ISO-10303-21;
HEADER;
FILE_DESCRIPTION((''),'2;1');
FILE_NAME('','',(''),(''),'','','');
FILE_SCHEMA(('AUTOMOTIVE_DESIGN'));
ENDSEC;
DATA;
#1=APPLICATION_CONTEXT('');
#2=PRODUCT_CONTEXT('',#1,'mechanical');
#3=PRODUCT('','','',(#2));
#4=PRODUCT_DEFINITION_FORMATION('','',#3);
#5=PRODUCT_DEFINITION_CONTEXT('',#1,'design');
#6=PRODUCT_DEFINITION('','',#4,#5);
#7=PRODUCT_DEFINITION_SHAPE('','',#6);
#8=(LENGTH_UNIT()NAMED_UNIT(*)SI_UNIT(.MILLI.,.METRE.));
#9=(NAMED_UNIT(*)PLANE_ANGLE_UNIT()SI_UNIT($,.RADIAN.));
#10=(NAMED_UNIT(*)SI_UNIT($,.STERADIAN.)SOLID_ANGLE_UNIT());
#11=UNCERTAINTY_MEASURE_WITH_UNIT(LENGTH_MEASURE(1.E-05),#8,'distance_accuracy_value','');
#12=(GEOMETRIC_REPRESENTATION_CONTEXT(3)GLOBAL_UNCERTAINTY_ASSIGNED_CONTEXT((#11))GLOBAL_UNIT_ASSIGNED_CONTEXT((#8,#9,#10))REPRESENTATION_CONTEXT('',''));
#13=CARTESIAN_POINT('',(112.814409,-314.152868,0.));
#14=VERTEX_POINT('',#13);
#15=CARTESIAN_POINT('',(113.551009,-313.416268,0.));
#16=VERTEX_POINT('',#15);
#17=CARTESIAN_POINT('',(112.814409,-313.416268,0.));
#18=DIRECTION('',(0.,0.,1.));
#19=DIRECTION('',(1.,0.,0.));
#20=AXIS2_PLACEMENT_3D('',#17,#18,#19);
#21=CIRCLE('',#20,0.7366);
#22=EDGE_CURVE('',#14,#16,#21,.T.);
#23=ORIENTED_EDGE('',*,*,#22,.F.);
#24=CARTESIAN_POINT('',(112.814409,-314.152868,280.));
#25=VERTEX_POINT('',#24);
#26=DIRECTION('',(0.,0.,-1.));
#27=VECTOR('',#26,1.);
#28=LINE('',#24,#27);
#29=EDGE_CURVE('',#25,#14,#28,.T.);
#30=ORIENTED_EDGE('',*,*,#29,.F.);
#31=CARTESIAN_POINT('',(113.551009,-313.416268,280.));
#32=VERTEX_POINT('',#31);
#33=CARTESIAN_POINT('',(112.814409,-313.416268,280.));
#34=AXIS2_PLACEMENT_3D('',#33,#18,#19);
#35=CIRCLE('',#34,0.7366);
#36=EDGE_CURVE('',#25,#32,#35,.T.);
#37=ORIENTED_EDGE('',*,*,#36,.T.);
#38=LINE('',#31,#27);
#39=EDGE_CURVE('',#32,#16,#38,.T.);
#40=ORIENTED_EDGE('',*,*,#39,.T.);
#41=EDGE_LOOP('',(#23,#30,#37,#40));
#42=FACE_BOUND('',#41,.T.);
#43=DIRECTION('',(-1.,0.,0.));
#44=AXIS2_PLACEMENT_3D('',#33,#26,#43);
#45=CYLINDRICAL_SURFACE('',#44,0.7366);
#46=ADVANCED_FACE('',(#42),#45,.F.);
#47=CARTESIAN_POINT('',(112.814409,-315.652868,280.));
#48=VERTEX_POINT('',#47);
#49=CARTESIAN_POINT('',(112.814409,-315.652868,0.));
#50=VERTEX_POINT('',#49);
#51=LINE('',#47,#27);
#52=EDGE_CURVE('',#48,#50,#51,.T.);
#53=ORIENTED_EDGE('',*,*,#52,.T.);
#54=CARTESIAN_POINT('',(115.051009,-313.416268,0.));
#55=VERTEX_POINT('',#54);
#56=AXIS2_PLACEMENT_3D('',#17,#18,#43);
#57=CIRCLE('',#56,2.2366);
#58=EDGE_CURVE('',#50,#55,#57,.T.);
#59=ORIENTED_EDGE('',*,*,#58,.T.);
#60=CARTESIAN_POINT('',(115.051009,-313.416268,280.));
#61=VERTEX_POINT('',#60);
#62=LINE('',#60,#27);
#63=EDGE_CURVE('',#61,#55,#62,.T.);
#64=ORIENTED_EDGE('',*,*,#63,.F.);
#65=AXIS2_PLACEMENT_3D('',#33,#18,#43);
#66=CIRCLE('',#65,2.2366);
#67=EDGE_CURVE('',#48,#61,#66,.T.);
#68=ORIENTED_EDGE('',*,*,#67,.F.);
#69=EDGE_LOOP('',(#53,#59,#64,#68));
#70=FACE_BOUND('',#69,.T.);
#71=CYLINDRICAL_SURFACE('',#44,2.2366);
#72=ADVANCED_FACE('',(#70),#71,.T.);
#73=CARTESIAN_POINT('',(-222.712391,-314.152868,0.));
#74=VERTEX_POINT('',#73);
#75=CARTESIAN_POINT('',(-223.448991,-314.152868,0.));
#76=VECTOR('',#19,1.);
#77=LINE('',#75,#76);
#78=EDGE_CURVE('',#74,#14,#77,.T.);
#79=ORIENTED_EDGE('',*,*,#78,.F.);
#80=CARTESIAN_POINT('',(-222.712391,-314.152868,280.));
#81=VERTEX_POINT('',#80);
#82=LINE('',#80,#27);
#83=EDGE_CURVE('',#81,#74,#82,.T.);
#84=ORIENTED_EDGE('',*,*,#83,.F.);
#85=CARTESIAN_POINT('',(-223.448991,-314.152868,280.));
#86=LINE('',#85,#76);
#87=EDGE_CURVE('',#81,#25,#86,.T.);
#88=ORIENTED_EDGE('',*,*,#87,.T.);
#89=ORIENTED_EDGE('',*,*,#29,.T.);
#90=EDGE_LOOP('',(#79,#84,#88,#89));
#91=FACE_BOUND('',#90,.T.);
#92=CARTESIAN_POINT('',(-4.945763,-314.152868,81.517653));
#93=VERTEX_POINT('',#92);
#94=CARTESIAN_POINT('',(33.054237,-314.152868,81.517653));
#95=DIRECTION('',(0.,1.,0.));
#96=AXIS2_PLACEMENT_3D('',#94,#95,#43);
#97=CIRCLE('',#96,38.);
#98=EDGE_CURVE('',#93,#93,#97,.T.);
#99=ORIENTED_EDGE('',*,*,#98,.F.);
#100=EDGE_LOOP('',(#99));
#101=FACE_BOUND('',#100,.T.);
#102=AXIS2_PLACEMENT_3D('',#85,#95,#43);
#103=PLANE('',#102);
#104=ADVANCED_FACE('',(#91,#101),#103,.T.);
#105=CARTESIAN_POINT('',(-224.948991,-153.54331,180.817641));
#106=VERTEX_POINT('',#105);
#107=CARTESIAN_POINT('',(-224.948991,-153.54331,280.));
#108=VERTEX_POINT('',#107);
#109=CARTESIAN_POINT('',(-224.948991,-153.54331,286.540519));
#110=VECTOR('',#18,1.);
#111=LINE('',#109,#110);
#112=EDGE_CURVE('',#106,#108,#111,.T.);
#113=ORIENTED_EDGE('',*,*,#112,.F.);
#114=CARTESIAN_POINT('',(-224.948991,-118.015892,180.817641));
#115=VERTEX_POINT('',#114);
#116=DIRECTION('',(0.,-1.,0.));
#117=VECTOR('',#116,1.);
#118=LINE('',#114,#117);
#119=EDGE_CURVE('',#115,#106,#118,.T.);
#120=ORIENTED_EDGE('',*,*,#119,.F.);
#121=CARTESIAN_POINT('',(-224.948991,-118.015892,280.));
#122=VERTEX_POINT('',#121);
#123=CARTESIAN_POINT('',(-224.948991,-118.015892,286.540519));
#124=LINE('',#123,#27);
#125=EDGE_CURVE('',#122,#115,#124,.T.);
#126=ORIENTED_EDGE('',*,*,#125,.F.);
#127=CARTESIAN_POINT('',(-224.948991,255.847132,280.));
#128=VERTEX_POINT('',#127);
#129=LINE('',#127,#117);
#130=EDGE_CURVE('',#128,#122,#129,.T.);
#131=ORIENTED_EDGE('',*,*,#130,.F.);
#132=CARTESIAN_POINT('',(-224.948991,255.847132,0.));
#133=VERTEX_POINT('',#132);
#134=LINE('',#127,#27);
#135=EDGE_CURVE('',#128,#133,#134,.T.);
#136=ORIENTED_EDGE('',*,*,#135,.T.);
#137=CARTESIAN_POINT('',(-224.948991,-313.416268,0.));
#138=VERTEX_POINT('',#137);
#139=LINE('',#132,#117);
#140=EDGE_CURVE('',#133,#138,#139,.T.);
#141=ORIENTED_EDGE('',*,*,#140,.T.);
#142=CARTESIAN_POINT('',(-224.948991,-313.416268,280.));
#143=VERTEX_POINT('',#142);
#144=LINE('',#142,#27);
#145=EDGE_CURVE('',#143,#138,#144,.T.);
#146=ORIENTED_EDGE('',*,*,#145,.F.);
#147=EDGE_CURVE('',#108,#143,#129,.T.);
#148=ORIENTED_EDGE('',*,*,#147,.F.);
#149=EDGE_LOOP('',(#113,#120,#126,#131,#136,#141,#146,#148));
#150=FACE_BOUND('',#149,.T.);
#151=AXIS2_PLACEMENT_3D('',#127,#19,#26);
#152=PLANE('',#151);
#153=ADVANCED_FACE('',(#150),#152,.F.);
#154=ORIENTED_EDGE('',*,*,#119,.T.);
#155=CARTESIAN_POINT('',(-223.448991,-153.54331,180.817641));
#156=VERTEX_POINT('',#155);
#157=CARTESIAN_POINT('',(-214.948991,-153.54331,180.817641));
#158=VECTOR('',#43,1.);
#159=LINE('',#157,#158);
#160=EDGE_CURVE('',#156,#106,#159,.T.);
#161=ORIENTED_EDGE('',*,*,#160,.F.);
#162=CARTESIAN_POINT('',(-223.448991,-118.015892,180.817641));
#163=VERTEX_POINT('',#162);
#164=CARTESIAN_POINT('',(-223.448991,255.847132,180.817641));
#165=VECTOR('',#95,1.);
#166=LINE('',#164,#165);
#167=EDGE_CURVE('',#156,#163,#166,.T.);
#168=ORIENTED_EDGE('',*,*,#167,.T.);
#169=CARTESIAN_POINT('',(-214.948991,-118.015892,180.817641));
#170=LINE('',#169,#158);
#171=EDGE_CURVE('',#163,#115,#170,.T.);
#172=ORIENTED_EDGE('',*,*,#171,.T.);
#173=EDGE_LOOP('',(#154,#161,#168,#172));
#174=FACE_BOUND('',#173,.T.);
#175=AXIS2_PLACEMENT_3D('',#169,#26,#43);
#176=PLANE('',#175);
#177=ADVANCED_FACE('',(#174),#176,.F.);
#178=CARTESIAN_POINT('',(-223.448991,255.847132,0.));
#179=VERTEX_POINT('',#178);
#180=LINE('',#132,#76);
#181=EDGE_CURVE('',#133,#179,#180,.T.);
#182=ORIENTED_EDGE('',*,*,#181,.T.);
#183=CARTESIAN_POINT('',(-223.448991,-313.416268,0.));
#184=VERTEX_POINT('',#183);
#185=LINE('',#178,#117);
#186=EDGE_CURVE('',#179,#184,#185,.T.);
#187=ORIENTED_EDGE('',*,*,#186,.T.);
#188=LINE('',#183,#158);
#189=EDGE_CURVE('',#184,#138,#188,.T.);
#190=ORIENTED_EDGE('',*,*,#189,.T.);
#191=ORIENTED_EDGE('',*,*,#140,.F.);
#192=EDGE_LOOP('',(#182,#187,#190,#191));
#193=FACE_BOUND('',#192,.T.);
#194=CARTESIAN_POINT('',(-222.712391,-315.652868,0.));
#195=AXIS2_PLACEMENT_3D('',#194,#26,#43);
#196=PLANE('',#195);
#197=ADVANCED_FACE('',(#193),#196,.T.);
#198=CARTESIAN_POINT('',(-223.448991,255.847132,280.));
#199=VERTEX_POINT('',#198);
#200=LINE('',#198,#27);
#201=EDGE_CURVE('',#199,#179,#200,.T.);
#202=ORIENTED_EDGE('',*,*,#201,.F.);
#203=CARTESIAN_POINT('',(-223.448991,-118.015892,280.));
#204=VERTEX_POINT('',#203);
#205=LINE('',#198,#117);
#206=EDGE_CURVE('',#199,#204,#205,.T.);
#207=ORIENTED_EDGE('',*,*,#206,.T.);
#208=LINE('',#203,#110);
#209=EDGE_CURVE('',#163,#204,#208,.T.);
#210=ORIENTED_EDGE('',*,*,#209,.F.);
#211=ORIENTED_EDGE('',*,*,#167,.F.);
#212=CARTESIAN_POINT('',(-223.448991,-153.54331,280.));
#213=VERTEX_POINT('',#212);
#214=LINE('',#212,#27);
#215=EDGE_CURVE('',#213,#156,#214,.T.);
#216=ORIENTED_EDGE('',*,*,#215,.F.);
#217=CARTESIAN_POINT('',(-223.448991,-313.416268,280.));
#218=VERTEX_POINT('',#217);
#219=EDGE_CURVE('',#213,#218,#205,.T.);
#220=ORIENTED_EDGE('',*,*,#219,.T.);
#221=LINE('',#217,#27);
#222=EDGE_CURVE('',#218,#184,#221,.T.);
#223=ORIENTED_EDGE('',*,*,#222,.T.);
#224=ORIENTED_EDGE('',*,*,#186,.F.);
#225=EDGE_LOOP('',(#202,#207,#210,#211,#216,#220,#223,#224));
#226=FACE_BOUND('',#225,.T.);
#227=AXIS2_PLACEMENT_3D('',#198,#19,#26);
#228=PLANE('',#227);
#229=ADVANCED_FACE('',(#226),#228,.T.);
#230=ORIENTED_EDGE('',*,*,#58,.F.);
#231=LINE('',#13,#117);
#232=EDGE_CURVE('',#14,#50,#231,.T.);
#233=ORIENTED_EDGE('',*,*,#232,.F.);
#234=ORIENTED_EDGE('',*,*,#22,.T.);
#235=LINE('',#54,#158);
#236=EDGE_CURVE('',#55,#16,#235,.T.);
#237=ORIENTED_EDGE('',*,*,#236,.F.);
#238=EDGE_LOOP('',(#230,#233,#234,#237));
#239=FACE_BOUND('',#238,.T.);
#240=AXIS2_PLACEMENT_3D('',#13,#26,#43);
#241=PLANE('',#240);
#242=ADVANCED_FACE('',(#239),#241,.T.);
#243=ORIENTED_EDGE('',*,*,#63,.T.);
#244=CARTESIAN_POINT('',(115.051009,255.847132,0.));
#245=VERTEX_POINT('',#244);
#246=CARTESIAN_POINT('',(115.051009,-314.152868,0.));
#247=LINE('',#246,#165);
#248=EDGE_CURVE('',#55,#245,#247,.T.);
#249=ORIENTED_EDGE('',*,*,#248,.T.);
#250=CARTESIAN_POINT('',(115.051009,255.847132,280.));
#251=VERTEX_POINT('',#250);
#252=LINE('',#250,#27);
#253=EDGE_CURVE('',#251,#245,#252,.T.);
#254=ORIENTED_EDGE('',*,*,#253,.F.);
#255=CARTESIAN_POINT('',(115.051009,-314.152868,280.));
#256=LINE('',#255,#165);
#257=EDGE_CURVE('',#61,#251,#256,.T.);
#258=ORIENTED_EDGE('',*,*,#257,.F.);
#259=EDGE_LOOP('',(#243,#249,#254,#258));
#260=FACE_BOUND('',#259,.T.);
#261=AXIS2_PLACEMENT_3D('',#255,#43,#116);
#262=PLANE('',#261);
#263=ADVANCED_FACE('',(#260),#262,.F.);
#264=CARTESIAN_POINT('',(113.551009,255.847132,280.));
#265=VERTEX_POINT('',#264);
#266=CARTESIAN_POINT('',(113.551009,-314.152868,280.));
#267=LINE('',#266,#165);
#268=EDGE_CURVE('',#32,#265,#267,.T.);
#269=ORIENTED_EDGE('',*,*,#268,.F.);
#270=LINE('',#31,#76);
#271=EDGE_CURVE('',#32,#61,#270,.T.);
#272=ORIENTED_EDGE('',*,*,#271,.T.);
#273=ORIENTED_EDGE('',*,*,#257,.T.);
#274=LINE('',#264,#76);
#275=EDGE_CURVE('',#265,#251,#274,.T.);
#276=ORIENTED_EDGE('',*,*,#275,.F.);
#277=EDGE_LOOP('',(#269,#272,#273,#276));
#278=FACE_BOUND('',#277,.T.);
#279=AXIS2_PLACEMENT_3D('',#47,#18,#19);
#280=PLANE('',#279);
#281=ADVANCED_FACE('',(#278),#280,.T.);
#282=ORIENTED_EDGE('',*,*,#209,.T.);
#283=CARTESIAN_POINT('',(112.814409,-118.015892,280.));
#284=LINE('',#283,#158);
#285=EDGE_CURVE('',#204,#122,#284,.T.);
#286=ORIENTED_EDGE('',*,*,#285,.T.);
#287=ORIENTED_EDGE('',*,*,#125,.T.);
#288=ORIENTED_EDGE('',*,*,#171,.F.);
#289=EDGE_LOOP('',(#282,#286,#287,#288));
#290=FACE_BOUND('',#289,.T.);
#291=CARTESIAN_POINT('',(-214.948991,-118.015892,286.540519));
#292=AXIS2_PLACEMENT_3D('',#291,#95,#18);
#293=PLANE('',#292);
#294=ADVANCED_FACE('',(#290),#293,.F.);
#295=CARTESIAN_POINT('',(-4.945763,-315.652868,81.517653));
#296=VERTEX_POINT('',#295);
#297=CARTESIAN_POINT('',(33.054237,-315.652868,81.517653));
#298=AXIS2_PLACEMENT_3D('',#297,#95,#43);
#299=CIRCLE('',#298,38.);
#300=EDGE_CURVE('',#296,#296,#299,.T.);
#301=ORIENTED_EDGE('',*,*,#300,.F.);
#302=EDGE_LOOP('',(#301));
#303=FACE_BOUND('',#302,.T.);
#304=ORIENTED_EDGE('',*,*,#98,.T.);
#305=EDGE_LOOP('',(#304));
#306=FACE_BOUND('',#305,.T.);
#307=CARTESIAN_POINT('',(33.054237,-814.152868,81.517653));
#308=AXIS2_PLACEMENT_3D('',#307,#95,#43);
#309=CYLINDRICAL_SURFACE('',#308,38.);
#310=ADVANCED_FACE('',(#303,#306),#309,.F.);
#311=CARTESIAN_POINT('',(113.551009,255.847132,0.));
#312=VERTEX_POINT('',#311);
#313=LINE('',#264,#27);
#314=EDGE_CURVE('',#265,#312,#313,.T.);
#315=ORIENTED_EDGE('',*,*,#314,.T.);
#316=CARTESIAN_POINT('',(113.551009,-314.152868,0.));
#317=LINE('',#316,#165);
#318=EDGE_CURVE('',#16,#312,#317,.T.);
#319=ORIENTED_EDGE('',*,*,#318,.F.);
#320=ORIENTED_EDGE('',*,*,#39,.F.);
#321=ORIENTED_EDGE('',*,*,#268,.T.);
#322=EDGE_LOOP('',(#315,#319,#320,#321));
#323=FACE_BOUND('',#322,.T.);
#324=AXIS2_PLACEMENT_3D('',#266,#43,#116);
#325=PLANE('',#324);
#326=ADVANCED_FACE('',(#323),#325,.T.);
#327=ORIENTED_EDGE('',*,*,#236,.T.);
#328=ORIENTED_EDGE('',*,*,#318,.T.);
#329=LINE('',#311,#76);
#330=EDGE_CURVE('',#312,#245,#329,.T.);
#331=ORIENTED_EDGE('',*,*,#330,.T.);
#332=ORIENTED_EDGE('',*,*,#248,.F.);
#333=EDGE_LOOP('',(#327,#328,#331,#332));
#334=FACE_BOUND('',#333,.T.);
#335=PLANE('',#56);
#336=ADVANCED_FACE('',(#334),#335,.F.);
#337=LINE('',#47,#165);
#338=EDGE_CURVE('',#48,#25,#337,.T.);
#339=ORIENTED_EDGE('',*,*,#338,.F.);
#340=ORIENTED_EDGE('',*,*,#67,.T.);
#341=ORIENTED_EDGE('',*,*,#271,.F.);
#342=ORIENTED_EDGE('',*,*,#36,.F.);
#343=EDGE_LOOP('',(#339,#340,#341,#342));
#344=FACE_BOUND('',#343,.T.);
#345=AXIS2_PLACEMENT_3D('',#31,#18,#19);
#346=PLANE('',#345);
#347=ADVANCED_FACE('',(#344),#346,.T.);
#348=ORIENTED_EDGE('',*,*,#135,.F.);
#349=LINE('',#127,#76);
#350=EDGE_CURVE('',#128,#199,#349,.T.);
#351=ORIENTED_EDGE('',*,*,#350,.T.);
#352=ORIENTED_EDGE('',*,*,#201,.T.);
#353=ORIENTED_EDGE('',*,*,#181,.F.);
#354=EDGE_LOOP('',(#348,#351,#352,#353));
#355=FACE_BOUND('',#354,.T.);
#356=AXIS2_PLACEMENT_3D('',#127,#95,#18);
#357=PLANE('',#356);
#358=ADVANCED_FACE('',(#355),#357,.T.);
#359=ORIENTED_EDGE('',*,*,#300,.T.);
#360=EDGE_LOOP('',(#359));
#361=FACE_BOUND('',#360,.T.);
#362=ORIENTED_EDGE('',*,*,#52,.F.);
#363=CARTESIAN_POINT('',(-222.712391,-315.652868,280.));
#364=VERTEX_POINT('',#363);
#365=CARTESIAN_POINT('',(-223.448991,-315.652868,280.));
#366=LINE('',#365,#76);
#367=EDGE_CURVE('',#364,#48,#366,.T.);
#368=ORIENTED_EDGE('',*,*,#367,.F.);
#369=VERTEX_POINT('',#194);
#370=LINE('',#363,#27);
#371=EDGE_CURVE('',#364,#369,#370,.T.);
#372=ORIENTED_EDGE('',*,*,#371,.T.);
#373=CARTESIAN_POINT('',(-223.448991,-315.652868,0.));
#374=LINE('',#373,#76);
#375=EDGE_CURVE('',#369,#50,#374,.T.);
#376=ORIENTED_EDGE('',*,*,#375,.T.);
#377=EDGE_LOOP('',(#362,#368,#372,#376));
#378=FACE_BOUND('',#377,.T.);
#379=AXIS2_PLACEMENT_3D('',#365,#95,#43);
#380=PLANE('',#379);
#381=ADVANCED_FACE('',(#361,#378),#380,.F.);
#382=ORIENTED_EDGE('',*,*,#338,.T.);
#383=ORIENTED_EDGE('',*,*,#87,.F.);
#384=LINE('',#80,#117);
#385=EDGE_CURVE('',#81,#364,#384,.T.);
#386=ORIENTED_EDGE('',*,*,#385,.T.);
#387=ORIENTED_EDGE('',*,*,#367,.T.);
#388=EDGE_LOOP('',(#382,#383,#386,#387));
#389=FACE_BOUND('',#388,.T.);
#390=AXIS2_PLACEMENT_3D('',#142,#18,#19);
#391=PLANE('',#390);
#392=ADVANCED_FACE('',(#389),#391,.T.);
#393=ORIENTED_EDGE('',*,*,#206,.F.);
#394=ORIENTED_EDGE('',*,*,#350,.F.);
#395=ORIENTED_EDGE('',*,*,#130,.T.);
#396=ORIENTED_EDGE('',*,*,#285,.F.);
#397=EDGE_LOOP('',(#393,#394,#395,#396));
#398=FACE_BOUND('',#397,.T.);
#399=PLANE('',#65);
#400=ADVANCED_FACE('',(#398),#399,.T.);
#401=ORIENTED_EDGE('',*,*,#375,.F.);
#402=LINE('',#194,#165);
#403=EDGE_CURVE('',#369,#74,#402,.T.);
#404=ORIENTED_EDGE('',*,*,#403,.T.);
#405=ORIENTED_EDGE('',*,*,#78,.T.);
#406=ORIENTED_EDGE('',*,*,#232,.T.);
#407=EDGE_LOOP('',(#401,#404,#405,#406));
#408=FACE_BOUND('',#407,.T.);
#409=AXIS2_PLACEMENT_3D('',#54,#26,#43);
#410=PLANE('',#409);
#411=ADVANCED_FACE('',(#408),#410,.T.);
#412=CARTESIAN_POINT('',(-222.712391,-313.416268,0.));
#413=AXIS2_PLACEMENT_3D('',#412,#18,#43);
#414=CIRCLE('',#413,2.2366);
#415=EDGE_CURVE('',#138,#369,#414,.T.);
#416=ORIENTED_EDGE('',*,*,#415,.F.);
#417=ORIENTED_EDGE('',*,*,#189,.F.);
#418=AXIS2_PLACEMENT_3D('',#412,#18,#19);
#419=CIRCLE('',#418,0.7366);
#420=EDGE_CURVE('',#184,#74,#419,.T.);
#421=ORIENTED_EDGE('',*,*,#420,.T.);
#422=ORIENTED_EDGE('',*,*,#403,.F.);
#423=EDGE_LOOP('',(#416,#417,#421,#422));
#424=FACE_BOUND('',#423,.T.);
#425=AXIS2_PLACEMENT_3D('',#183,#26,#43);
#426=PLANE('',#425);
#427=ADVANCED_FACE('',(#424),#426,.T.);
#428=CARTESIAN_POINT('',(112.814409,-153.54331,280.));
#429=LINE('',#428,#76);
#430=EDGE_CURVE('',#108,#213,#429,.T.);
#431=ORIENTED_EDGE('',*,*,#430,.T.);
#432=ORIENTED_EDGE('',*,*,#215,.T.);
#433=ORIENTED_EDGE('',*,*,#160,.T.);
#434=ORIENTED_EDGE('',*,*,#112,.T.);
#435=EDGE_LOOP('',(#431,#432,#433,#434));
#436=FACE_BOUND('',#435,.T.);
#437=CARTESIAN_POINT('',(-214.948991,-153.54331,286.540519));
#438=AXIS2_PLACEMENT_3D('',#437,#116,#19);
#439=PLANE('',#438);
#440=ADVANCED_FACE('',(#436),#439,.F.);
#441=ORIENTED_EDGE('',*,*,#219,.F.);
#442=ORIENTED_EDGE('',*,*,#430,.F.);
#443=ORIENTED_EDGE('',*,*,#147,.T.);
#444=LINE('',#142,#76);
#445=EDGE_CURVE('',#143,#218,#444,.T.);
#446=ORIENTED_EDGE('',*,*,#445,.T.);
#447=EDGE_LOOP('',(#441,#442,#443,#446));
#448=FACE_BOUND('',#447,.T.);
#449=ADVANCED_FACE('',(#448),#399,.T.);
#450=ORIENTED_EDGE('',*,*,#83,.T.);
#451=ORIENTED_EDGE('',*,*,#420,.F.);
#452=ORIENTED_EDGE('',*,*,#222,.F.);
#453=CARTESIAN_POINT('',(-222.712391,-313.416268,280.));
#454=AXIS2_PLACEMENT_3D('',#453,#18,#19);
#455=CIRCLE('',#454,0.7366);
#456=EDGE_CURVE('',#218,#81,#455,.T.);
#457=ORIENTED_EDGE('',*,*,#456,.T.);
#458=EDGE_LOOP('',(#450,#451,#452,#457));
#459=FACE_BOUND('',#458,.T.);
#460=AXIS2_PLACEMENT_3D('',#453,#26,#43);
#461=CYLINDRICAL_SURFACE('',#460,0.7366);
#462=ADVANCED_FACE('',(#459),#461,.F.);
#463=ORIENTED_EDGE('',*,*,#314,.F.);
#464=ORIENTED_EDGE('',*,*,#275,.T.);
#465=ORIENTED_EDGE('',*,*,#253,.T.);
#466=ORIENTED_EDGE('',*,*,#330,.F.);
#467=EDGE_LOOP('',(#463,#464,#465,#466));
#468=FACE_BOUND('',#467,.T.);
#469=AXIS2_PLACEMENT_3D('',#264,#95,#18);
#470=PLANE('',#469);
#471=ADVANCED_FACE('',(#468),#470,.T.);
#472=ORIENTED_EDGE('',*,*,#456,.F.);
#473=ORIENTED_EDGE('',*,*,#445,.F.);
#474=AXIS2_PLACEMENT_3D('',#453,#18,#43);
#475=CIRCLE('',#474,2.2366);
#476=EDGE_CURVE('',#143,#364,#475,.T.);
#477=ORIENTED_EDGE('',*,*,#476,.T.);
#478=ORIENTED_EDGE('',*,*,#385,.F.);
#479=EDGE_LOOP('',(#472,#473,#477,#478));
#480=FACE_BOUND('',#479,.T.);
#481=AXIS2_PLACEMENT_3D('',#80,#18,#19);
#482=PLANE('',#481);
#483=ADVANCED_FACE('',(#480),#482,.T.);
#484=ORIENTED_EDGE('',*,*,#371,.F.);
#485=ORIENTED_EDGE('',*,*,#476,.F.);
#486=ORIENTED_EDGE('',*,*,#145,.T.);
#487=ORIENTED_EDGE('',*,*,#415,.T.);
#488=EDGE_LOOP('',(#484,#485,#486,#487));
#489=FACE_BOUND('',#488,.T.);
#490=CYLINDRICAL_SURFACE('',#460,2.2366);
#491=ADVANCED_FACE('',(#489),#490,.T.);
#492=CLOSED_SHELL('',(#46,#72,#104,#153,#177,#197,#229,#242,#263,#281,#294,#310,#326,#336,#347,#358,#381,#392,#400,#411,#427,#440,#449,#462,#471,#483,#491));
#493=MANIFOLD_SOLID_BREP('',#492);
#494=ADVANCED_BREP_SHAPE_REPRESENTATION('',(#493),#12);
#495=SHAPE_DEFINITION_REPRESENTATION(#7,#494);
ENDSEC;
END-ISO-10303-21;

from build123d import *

# Parameters (mm, degrees)
BASE_FLANGE1_DEPTH = 280
SKETCH2_W          = 105.722877612
SKETCH2_H          = 35.527417617
CUT_EXTRUDE1_DEPTH = 10
SKETCH3_R          = 38
CUT_EXTRUDE2_DEPTH = 500


# Sheet-metal steps are written as plain solids
with BuildPart() as part:
    # Sketch1 → Base-Flange1 (new body)
    with BuildSketch(Plane(origin=(0, 0, 0), x_dir=(-1, 0, 0), z_dir=(0, 0, 1))):
        with BuildLine():
            Line((223.448991217, -255.847131966), (223.448991217, 313.416268034))
            ThreePointArc((223.448991217, 313.416268034), (223.233246072, 313.937122889), (222.712391217, 314.152868034))
            Line((222.712391217, 314.152868034), (-112.814408783, 314.152868034))
            ThreePointArc((-112.814408783, 314.152868034), (-113.335263638, 313.937122889), (-113.551008783, 313.416268034))
            Line((-113.551008783, 313.416268034), (-113.551008783, -255.847131966))
            Line((-113.551008783, -255.847131966), (-115.051008783, -255.847131966))
            Line((-115.051008783, -255.847131966), (-115.051008783, 313.416268034))
            ThreePointArc((-115.051008783, 313.416268034), (-114.39592381, 314.997783061), (-112.814408783, 315.652868034))
            Line((-112.814408783, 315.652868034), (222.712391217, 315.652868034))
            ThreePointArc((222.712391217, 315.652868034), (224.293906243, 314.997783061), (224.948991217, 313.416268034))
            Line((224.948991217, 313.416268034), (224.948991217, -255.847131966))
            Line((224.948991217, -255.847131966), (223.448991217, -255.847131966))
        make_face()
    extrude(amount=BASE_FLANGE1_DEPTH)

    # Sketch2 → Cut-Extrude1 (cut)
    with BuildSketch(Plane.ZY.offset(224.948991217)):
        with Locations((233.67908011, -135.779600883)):
            Rectangle(SKETCH2_W, SKETCH2_H)
    extrude(amount=-CUT_EXTRUDE1_DEPTH, mode=Mode.SUBTRACT)

    # Sketch3 → Cut-Extrude2 (cut)
    with BuildSketch(Plane(origin=(0, -314.152868034, 0), x_dir=(1, 0, 0), z_dir=(0, 1, 0))):
        with Locations(Location((33.054236524, -81.51765287, 0), (0, 0, 180))):
            Circle(SKETCH3_R)
    extrude(amount=-CUT_EXTRUDE2_DEPTH, mode=Mode.SUBTRACT)


solid = part.part
